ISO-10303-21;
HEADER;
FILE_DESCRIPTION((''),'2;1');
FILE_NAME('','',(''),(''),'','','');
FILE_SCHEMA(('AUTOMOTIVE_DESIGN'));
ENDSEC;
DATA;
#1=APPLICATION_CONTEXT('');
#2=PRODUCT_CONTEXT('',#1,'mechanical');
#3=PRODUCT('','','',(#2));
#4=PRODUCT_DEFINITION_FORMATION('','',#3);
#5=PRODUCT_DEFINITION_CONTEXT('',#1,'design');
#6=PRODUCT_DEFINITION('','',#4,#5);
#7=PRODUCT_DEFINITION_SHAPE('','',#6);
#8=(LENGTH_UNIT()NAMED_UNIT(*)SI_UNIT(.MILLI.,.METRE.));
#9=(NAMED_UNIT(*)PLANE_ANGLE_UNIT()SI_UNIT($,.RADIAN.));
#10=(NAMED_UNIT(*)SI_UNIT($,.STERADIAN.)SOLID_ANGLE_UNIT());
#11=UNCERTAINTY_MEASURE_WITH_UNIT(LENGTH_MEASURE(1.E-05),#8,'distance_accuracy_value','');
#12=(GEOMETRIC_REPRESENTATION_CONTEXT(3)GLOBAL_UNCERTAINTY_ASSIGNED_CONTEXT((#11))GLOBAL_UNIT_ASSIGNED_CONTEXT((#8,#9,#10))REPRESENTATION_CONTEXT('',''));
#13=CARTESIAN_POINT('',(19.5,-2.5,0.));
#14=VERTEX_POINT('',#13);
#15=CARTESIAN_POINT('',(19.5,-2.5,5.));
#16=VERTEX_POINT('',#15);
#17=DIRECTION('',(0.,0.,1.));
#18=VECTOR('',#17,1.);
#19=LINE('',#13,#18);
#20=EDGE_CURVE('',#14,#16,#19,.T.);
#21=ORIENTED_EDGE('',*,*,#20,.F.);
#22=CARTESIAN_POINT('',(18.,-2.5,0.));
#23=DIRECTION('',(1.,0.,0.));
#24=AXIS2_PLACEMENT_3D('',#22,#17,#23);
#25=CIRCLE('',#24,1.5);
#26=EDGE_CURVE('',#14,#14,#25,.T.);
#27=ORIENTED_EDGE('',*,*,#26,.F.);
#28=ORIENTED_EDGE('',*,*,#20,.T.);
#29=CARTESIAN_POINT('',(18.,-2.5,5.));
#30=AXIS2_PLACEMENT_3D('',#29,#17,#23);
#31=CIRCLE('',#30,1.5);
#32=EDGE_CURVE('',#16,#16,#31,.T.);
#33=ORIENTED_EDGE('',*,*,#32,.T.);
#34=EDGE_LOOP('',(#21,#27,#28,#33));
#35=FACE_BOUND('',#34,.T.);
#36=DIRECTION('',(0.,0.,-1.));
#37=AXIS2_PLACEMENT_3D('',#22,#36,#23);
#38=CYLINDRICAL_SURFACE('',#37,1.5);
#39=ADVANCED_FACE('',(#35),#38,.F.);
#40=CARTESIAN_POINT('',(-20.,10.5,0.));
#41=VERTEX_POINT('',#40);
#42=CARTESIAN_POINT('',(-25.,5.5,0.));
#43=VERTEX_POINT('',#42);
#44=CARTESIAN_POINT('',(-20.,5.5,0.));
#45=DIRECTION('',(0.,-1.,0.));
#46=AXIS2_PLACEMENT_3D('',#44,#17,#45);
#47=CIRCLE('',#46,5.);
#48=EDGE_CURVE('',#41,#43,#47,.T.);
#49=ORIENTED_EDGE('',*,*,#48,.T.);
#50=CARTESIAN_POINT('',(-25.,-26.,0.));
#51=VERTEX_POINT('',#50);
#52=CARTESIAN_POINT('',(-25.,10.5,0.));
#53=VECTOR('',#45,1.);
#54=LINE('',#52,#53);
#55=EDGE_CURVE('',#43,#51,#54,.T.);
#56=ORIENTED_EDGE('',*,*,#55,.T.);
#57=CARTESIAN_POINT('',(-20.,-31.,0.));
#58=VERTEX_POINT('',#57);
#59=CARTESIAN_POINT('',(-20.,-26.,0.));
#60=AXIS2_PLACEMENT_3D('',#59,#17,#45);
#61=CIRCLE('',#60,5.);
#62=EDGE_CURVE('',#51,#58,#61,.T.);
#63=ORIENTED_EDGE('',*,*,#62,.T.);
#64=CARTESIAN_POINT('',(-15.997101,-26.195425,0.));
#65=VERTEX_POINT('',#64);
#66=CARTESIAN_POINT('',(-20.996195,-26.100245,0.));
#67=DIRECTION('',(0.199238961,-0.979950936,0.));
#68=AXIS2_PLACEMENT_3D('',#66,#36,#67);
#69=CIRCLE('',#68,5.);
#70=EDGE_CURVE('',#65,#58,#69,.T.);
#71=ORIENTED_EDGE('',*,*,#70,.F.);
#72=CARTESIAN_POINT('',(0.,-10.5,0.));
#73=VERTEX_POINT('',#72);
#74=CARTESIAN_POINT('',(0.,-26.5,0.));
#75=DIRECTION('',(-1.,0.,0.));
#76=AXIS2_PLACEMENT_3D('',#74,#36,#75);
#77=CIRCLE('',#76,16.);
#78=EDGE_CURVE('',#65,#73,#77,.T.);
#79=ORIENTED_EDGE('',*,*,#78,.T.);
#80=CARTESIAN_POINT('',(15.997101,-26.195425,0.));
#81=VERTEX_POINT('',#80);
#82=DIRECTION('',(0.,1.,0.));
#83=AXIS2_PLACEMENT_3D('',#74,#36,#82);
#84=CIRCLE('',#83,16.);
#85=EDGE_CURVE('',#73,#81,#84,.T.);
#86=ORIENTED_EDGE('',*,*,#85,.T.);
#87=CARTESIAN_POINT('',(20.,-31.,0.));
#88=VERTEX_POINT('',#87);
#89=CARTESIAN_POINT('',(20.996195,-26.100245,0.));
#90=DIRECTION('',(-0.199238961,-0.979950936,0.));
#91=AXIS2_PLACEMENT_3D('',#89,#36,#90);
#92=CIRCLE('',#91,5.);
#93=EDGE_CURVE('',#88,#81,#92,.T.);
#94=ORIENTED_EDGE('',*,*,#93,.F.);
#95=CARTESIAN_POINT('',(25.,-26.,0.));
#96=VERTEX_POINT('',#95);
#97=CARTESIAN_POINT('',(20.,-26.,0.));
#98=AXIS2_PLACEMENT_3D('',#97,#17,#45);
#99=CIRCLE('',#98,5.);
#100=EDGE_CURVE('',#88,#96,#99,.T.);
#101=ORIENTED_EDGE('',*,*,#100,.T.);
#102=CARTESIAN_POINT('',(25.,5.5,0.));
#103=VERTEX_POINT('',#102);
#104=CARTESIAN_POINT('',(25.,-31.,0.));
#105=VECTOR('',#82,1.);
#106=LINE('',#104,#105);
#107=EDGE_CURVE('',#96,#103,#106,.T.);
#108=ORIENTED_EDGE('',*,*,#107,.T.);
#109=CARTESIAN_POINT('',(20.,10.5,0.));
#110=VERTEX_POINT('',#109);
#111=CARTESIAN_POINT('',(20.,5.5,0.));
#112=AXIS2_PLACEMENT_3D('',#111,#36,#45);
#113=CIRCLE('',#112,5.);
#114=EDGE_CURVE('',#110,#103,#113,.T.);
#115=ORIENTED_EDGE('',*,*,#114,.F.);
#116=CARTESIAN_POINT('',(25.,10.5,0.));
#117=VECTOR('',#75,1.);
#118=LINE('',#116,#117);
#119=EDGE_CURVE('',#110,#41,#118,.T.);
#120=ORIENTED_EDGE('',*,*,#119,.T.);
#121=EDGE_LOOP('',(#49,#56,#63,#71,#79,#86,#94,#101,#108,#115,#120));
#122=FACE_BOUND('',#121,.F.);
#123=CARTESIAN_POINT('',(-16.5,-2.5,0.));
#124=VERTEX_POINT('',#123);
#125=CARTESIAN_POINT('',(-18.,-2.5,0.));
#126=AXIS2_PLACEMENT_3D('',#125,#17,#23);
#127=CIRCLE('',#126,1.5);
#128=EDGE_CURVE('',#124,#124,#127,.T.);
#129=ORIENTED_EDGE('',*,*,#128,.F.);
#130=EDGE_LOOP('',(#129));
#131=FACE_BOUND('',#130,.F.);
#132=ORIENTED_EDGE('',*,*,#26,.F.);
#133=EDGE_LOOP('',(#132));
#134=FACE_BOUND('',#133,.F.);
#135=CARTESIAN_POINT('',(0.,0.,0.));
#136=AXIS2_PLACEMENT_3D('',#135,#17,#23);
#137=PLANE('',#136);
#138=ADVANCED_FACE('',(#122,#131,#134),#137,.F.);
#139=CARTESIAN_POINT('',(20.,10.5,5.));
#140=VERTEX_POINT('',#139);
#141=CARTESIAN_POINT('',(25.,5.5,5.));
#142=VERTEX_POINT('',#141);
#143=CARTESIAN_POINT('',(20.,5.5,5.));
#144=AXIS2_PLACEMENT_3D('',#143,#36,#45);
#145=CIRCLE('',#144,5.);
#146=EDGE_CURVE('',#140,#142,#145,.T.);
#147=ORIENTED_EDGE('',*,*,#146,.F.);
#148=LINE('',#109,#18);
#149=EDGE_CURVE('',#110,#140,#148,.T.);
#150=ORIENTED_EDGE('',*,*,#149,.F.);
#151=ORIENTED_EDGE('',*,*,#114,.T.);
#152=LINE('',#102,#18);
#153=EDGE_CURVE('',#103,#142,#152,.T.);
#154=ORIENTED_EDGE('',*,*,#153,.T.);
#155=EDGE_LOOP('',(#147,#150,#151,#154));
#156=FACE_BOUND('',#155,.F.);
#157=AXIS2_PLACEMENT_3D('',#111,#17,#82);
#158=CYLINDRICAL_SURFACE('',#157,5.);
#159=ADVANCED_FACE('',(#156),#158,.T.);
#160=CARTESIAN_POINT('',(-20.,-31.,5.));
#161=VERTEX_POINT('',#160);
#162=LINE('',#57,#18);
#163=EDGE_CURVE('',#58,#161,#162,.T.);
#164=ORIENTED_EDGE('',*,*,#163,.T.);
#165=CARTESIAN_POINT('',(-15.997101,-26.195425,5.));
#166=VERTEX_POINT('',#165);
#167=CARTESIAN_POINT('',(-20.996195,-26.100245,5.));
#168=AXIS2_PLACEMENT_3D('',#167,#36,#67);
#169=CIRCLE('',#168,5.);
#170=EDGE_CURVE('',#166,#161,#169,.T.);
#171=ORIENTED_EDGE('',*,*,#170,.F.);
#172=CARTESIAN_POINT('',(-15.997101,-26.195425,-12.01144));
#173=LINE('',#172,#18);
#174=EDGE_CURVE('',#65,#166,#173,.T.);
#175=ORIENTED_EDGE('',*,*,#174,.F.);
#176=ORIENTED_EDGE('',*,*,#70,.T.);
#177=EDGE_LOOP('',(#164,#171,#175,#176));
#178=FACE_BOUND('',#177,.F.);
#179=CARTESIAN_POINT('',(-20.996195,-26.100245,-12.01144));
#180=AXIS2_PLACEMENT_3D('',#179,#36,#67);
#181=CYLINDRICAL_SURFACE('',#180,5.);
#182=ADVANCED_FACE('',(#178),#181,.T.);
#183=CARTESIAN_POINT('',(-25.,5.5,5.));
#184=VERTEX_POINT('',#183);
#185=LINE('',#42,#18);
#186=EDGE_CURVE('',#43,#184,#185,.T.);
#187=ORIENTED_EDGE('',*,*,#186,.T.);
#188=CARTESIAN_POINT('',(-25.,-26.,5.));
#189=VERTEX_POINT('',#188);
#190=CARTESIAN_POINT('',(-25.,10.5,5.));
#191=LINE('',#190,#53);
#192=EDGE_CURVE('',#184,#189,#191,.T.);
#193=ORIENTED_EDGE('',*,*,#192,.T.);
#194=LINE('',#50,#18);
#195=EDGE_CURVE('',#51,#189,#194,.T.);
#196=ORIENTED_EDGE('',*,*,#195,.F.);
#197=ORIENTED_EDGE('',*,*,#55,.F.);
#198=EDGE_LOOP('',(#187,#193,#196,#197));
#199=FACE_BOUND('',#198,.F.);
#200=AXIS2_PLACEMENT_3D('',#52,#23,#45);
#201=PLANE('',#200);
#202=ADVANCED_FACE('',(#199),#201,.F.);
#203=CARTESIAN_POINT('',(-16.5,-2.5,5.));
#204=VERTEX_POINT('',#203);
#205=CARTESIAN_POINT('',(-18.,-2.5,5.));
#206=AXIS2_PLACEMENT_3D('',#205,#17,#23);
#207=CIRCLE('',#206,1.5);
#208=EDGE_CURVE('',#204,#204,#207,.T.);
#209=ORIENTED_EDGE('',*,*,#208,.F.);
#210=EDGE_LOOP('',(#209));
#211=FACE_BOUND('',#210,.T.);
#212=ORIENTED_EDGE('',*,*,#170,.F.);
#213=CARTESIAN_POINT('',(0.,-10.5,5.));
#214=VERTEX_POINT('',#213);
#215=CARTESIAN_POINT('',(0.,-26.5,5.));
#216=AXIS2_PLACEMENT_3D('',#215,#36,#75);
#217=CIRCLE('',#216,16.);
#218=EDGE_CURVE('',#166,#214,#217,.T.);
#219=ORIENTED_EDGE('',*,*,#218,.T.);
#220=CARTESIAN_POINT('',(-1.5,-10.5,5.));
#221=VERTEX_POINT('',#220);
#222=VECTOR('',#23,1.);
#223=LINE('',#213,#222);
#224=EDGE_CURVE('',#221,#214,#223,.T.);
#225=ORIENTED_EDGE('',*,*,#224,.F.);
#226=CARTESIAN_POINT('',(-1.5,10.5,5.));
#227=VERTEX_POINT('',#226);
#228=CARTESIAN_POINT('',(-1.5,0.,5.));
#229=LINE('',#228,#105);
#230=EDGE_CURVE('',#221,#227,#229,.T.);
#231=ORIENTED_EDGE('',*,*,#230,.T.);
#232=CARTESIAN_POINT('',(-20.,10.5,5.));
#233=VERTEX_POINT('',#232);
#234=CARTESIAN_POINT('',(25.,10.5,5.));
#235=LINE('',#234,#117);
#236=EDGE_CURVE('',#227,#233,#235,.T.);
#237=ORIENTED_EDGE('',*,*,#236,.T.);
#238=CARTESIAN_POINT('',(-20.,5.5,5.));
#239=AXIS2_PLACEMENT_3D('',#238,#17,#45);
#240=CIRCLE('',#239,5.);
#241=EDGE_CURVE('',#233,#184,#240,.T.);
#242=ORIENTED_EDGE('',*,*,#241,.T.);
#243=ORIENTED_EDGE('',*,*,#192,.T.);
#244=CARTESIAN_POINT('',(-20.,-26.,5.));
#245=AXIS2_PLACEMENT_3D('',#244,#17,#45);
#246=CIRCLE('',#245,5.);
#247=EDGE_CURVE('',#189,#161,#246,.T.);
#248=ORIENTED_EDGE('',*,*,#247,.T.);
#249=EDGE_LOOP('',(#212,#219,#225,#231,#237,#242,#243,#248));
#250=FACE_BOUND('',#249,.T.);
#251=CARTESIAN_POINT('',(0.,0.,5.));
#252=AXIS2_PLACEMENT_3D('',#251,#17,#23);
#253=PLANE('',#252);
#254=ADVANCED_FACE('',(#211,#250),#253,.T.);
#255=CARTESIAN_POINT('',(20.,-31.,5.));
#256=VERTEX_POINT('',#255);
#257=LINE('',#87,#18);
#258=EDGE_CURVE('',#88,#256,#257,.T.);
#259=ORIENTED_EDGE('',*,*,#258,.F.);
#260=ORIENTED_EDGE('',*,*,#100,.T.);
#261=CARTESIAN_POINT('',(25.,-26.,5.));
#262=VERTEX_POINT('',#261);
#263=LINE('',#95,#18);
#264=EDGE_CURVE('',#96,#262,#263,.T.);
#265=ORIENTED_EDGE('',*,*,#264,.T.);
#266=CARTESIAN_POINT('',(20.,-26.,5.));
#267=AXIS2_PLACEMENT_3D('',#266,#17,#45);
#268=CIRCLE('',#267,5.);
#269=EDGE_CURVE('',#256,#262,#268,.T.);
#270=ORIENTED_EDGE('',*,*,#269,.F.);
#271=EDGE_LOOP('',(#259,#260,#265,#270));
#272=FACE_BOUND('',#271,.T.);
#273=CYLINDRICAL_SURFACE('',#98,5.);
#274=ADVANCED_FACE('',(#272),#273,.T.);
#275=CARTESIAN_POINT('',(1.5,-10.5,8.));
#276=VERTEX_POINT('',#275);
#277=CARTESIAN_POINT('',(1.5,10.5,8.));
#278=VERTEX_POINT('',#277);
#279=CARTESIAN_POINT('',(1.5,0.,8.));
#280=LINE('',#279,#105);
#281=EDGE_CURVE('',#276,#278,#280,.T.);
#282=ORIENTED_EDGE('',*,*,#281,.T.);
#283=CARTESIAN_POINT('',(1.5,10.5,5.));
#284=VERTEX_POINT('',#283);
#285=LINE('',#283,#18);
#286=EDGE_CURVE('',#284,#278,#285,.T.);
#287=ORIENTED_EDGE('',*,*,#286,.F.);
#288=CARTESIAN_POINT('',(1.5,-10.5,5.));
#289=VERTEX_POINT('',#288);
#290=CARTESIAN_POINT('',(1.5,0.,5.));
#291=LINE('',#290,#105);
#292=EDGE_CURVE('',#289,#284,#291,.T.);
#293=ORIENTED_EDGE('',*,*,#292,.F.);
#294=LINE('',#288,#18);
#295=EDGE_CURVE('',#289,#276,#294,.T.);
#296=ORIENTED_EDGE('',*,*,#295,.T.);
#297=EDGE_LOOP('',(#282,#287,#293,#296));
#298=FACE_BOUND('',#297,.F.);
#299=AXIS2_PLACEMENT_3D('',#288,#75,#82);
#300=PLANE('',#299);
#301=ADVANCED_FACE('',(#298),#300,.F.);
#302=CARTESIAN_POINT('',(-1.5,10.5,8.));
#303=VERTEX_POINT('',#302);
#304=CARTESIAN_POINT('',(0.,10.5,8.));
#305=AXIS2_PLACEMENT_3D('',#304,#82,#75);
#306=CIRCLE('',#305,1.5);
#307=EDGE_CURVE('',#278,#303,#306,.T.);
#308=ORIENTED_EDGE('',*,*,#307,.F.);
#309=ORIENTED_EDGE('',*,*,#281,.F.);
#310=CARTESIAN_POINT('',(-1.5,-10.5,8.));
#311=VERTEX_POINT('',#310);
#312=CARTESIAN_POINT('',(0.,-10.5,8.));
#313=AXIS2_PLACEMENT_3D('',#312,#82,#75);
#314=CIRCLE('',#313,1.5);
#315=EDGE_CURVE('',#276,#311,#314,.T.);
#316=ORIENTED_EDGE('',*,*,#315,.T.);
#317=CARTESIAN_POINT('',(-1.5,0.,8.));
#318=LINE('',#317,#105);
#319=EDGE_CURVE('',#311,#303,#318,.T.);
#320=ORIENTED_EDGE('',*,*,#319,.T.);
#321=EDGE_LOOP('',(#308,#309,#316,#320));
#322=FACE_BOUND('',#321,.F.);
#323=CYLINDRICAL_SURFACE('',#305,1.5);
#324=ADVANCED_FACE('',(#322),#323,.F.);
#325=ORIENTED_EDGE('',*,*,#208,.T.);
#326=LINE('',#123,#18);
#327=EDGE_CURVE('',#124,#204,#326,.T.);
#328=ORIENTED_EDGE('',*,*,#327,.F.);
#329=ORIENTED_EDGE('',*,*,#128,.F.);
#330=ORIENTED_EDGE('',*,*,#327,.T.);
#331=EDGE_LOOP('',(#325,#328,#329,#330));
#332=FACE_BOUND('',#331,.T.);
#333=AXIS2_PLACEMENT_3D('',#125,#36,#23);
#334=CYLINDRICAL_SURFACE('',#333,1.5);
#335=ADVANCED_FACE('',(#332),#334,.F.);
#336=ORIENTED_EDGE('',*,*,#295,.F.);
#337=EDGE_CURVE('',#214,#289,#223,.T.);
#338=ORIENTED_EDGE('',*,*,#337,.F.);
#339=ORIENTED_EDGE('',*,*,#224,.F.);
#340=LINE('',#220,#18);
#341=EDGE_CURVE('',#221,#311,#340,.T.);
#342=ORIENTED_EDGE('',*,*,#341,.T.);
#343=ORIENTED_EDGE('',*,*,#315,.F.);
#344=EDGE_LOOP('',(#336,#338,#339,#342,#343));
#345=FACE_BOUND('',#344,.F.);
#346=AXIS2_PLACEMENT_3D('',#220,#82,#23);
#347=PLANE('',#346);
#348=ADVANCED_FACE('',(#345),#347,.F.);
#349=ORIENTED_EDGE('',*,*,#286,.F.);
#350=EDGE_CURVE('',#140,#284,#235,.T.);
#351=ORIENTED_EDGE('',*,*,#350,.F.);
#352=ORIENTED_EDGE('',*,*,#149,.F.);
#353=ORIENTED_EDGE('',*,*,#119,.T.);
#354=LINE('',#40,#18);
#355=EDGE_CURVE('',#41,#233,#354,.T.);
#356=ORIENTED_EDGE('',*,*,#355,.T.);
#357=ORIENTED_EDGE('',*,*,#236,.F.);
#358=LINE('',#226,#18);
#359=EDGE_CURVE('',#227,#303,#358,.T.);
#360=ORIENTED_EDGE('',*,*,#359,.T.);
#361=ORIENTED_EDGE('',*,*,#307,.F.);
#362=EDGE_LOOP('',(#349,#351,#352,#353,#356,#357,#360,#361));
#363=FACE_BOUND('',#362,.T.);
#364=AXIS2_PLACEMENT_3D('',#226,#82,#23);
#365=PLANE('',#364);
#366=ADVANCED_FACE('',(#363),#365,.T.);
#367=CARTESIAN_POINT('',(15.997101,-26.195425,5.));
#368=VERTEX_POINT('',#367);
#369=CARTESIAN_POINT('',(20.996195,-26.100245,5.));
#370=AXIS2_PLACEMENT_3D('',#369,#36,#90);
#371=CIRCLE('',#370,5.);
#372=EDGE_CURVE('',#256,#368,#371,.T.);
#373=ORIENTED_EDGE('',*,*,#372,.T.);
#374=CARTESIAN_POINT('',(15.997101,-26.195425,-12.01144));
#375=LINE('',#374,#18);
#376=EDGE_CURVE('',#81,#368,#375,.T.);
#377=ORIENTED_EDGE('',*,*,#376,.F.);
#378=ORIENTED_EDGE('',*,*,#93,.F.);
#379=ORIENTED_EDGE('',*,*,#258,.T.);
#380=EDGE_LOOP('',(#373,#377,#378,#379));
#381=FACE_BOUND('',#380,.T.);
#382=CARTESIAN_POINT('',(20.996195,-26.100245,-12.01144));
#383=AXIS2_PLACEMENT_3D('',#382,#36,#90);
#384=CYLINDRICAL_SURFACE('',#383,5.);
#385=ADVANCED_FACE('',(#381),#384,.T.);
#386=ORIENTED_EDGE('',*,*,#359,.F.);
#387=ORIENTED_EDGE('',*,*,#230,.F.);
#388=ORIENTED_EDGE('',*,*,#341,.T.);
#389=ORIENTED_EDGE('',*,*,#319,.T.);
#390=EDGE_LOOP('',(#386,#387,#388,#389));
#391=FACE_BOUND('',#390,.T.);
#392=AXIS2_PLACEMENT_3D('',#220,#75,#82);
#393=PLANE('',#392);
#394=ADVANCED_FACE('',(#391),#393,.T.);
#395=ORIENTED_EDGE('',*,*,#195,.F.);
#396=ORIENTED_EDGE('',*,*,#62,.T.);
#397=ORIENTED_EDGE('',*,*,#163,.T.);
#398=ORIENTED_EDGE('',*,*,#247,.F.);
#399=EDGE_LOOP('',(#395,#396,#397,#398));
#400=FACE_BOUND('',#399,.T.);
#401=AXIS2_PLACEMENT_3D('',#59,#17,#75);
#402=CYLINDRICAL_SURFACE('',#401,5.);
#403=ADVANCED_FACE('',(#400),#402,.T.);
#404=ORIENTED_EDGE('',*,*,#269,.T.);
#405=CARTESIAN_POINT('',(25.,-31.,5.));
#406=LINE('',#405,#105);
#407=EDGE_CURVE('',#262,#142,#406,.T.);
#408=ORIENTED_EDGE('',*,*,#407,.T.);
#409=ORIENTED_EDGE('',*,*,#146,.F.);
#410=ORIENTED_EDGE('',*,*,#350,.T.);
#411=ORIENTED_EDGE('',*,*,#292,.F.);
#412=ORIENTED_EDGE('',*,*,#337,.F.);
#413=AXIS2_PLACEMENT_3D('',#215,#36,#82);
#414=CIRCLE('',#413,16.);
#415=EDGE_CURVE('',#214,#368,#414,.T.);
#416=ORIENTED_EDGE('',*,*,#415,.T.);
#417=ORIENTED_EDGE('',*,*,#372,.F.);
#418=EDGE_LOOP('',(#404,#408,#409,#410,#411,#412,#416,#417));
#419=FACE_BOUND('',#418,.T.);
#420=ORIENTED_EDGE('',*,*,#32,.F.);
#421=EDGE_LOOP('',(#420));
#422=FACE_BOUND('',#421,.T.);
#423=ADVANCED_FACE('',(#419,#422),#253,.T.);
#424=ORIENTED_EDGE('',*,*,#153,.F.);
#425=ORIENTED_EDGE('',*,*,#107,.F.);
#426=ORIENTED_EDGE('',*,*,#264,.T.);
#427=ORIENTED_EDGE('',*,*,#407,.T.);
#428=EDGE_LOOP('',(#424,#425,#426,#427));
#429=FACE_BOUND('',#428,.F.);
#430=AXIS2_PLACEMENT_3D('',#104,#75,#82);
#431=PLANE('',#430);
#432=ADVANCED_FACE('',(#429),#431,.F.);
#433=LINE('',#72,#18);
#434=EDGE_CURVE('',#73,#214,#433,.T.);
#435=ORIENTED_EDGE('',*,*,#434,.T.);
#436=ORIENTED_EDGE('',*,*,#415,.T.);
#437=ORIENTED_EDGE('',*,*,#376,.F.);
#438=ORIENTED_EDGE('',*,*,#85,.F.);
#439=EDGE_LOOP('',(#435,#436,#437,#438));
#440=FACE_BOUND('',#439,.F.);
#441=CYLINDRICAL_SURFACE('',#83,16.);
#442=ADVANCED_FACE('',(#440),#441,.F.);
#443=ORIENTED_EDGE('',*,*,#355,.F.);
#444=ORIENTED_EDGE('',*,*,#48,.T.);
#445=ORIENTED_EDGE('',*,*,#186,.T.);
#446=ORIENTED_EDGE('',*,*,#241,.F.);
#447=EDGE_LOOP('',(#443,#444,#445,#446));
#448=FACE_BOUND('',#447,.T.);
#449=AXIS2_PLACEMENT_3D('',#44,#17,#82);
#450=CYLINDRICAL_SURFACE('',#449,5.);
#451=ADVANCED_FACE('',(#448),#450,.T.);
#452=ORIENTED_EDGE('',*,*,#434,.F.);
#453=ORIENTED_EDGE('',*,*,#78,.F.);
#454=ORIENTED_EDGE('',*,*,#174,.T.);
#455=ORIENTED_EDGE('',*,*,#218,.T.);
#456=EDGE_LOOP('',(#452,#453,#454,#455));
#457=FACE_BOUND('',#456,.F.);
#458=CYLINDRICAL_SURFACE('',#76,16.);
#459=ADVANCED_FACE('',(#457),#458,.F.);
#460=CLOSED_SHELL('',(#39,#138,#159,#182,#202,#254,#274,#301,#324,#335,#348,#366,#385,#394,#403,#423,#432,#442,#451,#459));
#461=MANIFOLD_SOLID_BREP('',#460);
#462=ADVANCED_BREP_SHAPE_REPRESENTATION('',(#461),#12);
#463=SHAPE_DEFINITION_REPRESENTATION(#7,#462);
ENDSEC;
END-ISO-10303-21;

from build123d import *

# Parameters (mm, degrees)
F0_R        = 1.5
F1_DEPTH    = 5
F2_R        = 5
F3_W        = 3
F3_H        = 21
F4_DEPTH    = 3
F5_R        = 1.5
F6_DEPTH    = 21
F7_T1_DEPTH = 29.0228793414


# Not quite as in the source:
# - a fillet or chamfer that OpenCascade refuses, or shapes differently, is made with other operations: its cross-section is extruded or revolved along the edge and cut away or added


with BuildPart() as f1:
    # F0 (on Top) → F1 (new body)
    with BuildSketch(Plane.XY):
        Polygon((0, -10.5), (25, -10.5), (25, 10.5), (-25, 10.5), (-25, -10.5), align=None)
        with Locations((-18, -2.5)):
            Circle(F0_R, mode=Mode.SUBTRACT)
        with Locations((18, -2.5)):
            Circle(F0_R, mode=Mode.SUBTRACT)
        with BuildLine():
            Line((25, -31), (25, -10.5))
            Line((25, -10.5), (0, -10.5))
            ThreePointArc((0, -10.5), (11.313708499, -15.186291501), (16, -26.5))
            Line((16, -26.5), (16, -31))
            Line((16, -31), (25, -31))
        make_face()
        with BuildLine():
            ThreePointArc((-16, -26.5), (-11.313708499, -15.186291501), (0, -10.5))
            Line((0, -10.5), (-25, -10.5))
            Line((-25, -10.5), (-25, -31))
            Line((-25, -31), (-16, -31))
            Line((-16, -31), (-16, -26.5))
        make_face()
    extrude(amount=F1_DEPTH)

    # F2
    f2_edges = [f1.edges().sort_by_distance(p)[0] for p in [
        (25, -31, 2.5),
        (-25, -31, 2.5),
        (-25, 10.5, 2.5),
        (25, 10.5, 2.5),
    ]]
    fillet(f2_edges, radius=F2_R)

    # F3 (on face) → F4 (join)
    with BuildSketch(Plane.XY.offset(5)):
        Rectangle(F3_W, F3_H)
    extrude(amount=F4_DEPTH)

    # F5 (on face) → F6 (cut, through all)
    with BuildSketch(Plane(origin=(0, 10.5, 0), x_dir=(-1, 0, 0), z_dir=(0, 1, 0))):
        with Locations((0, 8)):
            Circle(F5_R)
    extrude(amount=-F6_DEPTH, mode=Mode.SUBTRACT)

    # F7: fillet of radius 5 on 2 edges, made by hand

    # F7_s2 → F7_t1 (cut)
    with BuildSketch(Plane.XY.offset(-12.0114396707)):
        with BuildLine():
            ThreePointArc((20, -31), (17.1547293043, -29.3007363495), (15.9971008021, -26.1954250064))
            Line((15.9971008021, -26.1954250064), (15.4971914021, -26.204942975))
            ThreePointArc((15.4971914021, -26.204942975), (15.5, -26.5), (15.5, -31))
            Line((15.5, -31), (16, -31.5))
            ThreePointArc((16, -31.5), (18, -31.5), (19.9003805197, -31.4899754679))
            Line((19.9003805197, -31.4899754679), (20, -31))
        make_face()
        with BuildLine():
            ThreePointArc((-20, -31), (-17.1547293043, -29.3007363495), (-15.9971008021, -26.1954250064))
            Line((-15.9971008021, -26.1954250064), (-15.4971914021, -26.204942975))
            ThreePointArc((-15.4971914021, -26.204942975), (-15.5, -26.5), (-15.5, -31))
            Line((-15.5, -31), (-16, -31.5))
            ThreePointArc((-16, -31.5), (-18, -31.5), (-19.9003805197, -31.4899754679))
            Line((-19.9003805197, -31.4899754679), (-20, -31))
        make_face()
    extrude(amount=F7_T1_DEPTH, mode=Mode.SUBTRACT)


solid = f1.part
